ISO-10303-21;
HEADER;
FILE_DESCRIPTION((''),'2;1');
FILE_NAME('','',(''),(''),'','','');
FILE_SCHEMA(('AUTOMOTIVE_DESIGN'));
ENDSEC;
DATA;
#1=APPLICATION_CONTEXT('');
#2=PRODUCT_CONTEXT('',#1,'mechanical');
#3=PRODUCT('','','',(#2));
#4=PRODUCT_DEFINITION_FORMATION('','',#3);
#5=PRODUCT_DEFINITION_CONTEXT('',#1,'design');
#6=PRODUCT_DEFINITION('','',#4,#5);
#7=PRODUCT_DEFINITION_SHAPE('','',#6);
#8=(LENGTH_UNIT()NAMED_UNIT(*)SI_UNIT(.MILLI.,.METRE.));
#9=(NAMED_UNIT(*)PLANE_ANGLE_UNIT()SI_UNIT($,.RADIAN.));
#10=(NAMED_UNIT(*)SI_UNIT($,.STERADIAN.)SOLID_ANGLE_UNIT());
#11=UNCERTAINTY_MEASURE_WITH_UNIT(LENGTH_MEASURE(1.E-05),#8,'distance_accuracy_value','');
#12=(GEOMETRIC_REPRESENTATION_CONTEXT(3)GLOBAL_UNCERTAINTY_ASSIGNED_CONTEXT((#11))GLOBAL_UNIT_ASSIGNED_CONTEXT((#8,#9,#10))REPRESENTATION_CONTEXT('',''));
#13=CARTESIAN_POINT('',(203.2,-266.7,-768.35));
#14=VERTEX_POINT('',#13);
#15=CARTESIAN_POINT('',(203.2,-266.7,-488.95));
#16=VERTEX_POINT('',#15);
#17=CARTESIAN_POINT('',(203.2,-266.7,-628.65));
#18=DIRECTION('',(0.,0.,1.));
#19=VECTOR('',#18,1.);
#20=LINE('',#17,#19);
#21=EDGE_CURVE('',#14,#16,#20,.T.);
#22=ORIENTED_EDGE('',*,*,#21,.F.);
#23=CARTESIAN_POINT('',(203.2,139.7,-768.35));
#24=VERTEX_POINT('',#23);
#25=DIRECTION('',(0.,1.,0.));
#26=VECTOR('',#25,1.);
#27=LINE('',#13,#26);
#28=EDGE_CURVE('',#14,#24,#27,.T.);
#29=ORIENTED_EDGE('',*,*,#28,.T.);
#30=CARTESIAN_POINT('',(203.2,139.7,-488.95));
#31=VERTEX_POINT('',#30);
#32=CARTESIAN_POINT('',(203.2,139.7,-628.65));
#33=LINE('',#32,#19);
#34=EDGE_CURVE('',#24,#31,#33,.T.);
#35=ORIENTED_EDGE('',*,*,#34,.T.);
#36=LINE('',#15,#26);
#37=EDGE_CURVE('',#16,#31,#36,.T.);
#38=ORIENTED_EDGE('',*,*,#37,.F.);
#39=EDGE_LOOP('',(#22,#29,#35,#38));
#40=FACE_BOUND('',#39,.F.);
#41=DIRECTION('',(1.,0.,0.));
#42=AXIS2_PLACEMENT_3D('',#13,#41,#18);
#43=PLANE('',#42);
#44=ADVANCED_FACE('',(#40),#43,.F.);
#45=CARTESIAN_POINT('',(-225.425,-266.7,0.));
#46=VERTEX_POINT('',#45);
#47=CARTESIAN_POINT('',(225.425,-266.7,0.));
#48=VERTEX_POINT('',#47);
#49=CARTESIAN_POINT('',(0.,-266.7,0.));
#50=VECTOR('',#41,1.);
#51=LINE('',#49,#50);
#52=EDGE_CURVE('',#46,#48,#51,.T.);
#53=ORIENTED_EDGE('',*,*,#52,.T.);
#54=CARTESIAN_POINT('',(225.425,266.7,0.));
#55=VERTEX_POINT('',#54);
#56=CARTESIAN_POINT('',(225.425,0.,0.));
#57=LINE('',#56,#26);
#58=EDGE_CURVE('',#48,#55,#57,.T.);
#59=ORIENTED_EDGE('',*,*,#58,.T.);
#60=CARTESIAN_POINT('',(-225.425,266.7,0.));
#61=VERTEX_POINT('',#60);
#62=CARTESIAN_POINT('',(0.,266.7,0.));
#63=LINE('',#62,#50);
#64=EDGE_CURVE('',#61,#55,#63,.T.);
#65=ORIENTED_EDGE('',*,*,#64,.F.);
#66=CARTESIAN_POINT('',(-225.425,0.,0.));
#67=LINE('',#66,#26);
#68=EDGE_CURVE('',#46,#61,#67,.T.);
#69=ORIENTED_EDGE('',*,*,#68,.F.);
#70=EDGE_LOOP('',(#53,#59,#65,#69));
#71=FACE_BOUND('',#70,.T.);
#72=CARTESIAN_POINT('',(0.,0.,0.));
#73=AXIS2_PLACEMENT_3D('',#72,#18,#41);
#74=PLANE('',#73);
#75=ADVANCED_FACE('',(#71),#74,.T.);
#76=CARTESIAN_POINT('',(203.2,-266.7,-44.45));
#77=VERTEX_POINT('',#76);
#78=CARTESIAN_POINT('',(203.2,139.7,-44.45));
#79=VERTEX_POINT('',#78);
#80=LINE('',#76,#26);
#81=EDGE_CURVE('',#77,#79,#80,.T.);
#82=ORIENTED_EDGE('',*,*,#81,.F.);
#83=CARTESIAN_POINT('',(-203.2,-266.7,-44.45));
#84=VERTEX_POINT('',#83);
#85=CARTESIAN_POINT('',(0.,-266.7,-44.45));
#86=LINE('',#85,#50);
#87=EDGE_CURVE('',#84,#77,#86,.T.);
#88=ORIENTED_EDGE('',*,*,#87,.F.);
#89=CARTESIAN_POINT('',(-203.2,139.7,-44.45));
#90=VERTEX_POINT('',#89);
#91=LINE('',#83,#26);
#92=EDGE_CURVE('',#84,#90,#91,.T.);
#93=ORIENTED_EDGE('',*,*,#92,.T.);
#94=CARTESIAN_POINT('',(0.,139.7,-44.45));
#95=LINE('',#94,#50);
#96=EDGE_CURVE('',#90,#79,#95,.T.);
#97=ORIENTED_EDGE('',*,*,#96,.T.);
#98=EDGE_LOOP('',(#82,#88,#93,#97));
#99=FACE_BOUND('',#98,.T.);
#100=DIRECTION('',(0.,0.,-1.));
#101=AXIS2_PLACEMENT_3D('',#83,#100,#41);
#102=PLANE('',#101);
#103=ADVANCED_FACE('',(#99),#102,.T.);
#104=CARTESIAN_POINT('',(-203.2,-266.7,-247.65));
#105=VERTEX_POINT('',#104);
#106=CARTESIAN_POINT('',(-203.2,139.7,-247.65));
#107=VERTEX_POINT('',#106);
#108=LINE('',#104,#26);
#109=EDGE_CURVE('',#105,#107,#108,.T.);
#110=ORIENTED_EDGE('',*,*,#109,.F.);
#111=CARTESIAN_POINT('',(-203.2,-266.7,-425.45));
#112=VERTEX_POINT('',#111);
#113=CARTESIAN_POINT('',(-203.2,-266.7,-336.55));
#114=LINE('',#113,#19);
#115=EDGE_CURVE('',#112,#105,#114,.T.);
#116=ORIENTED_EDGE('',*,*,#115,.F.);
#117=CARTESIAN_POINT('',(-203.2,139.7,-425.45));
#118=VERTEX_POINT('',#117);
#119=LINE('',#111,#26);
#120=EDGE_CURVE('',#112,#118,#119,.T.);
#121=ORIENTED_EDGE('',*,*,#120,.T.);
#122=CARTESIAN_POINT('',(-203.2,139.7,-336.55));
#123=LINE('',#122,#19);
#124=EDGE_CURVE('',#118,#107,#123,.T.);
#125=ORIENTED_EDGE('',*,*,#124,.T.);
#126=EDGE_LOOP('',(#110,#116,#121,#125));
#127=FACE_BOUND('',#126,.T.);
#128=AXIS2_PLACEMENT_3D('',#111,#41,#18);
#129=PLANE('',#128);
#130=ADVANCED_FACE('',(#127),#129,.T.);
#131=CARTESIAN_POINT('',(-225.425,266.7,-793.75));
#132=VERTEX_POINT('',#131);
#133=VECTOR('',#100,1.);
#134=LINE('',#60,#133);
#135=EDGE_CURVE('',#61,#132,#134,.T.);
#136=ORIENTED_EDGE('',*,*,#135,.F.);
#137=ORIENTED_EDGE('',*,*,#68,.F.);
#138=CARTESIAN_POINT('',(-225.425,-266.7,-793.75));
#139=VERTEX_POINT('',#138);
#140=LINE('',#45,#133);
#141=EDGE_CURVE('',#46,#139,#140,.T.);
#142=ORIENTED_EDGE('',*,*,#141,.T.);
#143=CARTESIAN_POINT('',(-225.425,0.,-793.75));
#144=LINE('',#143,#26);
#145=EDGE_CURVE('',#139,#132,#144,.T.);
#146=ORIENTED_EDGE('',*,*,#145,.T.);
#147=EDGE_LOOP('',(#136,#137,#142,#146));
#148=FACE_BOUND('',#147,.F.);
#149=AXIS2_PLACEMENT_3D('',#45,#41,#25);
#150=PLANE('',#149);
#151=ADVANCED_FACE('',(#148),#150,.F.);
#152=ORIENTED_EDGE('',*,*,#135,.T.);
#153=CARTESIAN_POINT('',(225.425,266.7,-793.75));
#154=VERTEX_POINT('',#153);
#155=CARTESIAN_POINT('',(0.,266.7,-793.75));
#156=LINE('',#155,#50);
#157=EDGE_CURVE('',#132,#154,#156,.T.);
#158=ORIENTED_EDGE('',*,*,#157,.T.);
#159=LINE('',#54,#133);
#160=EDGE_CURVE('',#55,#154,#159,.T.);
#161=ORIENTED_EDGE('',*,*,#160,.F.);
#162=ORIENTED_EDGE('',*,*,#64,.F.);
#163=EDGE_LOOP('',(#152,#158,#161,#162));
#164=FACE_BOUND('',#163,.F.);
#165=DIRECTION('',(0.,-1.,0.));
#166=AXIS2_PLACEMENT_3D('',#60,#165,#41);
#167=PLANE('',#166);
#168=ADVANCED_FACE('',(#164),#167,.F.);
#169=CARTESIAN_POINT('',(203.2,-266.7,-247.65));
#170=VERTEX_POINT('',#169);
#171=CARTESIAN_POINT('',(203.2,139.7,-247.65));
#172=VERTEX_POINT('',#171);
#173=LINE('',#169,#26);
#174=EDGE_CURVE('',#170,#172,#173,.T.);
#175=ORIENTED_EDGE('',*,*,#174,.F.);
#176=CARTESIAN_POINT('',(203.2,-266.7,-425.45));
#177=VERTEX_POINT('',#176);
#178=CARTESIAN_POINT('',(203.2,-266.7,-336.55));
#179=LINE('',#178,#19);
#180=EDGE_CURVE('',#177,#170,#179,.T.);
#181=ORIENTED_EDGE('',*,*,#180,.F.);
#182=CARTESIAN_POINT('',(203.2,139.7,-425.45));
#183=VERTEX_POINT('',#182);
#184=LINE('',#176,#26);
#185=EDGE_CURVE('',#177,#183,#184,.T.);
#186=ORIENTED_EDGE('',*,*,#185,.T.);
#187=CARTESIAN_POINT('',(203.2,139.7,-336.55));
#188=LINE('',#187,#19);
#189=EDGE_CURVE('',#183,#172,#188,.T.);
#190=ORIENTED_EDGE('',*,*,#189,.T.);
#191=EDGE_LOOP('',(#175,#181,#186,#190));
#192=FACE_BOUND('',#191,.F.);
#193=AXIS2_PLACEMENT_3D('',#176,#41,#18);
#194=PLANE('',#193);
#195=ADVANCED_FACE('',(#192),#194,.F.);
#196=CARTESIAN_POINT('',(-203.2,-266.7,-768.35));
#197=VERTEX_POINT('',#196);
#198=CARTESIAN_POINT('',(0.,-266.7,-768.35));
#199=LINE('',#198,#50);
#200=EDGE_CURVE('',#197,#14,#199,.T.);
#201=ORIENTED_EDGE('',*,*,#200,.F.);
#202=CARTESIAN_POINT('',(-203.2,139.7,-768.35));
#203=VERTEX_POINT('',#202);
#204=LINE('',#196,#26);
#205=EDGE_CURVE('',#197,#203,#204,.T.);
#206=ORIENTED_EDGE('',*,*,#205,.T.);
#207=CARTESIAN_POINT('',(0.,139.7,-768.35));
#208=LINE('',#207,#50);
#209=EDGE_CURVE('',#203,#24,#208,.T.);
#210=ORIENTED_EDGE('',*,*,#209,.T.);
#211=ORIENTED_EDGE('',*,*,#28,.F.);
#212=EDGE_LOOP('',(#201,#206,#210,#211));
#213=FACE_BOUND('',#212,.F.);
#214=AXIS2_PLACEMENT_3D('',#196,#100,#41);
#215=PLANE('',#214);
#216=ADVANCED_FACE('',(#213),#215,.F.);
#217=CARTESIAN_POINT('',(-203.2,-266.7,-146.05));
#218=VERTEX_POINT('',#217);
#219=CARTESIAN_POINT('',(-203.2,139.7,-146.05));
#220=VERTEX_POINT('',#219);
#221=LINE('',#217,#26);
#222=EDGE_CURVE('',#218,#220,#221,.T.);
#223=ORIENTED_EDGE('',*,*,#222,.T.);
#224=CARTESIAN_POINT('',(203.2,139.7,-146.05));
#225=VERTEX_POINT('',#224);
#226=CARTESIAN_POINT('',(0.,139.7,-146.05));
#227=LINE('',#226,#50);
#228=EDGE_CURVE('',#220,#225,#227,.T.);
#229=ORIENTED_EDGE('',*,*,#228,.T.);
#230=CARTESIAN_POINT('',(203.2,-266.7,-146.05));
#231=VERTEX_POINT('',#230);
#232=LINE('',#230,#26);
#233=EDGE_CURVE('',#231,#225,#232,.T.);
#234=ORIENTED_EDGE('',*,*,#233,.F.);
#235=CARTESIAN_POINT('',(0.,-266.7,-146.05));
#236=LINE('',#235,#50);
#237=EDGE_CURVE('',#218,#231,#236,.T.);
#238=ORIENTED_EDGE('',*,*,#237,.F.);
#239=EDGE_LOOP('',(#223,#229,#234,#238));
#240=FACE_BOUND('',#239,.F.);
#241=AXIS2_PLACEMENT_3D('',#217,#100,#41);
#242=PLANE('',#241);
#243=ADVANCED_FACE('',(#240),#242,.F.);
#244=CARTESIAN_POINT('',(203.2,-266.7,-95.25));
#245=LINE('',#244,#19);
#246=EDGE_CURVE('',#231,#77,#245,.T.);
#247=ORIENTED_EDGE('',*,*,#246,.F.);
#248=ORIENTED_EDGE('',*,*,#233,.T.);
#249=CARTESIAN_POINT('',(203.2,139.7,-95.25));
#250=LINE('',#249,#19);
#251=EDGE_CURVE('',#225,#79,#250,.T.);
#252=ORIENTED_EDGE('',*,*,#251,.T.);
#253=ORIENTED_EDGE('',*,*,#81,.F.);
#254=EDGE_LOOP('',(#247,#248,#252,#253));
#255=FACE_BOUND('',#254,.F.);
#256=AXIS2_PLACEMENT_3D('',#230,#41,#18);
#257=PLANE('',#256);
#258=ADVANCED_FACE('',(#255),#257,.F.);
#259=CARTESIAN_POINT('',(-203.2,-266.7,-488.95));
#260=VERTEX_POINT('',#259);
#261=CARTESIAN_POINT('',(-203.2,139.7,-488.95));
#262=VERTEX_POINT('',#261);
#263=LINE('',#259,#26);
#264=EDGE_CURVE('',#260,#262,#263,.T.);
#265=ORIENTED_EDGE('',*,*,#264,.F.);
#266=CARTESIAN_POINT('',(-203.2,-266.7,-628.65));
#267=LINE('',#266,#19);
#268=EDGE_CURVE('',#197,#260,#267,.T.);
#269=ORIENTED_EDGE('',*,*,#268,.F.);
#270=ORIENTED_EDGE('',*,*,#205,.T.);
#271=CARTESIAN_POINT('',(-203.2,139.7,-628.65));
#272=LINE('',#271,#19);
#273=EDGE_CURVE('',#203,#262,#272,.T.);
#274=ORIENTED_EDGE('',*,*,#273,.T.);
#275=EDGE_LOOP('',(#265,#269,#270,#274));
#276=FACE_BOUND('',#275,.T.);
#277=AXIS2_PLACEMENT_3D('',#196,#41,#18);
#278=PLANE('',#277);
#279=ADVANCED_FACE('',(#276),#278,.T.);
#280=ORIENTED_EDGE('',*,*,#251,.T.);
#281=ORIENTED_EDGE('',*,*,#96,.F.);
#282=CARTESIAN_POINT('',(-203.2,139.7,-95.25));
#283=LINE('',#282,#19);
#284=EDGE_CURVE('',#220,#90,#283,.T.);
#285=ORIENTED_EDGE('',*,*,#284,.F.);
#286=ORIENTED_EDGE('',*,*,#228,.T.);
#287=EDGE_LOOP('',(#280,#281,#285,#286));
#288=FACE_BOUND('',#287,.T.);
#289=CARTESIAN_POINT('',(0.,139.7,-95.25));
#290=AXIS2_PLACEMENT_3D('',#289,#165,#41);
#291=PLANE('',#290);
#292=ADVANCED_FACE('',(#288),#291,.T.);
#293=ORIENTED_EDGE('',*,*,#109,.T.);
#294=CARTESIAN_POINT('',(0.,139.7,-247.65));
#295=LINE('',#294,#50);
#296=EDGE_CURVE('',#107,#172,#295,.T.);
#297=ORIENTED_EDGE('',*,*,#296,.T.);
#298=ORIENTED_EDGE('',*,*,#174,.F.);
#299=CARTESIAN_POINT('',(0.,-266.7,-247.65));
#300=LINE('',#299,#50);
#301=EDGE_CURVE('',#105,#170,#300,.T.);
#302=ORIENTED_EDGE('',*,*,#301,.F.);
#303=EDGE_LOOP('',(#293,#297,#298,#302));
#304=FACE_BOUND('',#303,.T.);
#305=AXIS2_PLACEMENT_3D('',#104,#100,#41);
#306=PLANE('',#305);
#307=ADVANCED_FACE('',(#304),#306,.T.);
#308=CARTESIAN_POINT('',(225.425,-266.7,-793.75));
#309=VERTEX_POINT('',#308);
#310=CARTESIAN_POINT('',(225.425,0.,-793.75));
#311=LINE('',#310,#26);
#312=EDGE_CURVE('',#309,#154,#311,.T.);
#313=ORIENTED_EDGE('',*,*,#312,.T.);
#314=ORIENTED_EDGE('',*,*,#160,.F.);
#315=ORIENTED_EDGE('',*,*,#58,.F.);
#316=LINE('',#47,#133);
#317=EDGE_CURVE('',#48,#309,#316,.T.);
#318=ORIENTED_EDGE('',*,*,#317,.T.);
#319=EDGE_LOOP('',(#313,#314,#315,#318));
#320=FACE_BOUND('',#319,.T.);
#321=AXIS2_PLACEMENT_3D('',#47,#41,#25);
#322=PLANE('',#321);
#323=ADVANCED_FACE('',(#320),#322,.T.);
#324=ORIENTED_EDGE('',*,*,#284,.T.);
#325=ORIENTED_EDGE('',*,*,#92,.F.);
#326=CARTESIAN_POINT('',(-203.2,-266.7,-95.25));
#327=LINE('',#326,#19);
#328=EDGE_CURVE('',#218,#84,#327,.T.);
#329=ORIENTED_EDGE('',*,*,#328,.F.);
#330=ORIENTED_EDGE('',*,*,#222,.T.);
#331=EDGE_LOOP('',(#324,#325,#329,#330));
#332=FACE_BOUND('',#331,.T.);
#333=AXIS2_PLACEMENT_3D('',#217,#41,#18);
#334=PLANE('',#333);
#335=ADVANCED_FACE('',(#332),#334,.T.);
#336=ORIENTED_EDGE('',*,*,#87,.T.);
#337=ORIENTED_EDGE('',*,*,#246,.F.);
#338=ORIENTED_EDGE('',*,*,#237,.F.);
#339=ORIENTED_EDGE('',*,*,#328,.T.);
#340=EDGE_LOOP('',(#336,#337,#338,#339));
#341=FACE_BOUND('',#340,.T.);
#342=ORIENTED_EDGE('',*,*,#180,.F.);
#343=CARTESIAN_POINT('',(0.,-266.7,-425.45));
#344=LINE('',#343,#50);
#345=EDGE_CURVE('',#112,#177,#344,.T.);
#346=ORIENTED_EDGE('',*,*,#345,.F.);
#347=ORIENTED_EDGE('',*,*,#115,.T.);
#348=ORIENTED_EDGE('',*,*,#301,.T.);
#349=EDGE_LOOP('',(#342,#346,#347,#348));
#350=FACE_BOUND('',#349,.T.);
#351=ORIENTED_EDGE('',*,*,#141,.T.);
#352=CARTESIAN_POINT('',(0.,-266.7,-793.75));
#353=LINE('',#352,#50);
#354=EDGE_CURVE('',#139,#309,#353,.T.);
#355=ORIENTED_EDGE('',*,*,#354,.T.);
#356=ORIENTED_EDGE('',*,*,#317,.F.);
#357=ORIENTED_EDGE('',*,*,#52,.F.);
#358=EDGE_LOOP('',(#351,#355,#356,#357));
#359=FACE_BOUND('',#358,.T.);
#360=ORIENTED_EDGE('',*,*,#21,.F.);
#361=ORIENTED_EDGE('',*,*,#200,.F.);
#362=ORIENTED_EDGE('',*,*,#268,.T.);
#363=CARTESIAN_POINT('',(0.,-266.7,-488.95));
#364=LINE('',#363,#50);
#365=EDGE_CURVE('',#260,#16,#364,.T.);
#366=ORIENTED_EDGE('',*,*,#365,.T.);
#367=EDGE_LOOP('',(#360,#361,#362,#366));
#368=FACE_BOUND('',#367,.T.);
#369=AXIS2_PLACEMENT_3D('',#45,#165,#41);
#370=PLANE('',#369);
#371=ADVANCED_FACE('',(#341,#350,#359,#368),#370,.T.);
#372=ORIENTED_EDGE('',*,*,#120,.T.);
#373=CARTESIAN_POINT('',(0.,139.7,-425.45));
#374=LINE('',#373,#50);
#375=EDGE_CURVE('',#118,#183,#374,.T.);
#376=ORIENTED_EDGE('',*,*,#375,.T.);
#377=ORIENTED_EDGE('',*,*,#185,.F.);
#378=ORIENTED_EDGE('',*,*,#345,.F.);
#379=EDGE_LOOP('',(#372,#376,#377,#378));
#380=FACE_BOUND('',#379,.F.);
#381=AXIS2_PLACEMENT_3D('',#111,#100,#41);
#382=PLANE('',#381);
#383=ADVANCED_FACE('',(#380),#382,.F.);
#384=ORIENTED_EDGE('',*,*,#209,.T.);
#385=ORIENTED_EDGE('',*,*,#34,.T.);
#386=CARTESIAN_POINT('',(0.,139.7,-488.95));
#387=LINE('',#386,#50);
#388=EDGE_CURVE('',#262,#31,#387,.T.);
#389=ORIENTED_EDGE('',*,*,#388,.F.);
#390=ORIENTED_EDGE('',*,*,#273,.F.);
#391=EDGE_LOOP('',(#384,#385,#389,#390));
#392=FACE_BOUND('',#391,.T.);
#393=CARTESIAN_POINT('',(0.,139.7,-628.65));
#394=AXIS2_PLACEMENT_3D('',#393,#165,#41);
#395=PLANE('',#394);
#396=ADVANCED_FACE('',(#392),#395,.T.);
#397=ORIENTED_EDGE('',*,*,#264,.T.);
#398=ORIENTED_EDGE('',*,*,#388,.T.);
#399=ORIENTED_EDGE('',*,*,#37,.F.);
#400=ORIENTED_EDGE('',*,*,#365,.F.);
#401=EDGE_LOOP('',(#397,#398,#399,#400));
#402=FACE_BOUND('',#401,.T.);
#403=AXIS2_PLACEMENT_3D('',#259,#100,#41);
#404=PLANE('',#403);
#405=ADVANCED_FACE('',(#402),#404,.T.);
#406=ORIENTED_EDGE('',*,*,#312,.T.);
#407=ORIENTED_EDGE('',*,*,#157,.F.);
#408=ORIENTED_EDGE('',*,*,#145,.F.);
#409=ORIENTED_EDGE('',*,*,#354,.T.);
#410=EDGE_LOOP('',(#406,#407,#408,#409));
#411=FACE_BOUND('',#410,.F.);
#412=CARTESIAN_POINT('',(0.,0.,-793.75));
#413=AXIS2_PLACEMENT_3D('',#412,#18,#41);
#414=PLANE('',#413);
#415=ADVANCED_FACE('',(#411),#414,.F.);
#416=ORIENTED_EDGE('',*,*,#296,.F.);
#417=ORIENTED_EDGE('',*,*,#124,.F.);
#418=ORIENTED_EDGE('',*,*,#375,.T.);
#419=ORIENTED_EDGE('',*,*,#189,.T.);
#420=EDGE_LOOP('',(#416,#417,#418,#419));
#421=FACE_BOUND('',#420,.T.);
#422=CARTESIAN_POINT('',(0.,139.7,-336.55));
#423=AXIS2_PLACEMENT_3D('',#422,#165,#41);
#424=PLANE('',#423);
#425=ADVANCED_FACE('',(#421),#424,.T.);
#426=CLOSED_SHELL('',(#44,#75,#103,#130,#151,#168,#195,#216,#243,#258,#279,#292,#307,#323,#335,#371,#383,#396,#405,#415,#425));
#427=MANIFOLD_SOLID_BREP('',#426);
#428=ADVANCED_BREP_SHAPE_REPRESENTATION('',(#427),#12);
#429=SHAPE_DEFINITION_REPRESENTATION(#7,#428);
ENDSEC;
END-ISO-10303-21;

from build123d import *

# Parameters (mm, degrees)
F0_W     = 450.85
F0_H     = 533.4
F1_DEPTH = 793.75
F2_W     = 406.4
F2_H     = 101.6
F2_H_2   = 177.8
F2_H_3   = 279.4
F3_DEPTH = 406.4


# Not quite as in the source:
# - a feature names something its author has since deleted; it is built from what else it names


with BuildPart() as f1:
    # F0 (on Top) → F1 (new body)
    with BuildSketch(Plane.XY):
        Rectangle(F0_W, F0_H)
    extrude(amount=-F1_DEPTH)

    # F2 (on face) → F3 (cut)
    with BuildSketch(Plane.XZ.offset(266.7)):
        with Locations((0, -95.25)):
            Rectangle(F2_W, F2_H)
        with Locations((0, -336.55)):
            Rectangle(F2_W, F2_H_2)
        with Locations((0, -628.65)):
            Rectangle(F2_W, F2_H_3)
    extrude(amount=-F3_DEPTH, mode=Mode.SUBTRACT)


solid = f1.part
